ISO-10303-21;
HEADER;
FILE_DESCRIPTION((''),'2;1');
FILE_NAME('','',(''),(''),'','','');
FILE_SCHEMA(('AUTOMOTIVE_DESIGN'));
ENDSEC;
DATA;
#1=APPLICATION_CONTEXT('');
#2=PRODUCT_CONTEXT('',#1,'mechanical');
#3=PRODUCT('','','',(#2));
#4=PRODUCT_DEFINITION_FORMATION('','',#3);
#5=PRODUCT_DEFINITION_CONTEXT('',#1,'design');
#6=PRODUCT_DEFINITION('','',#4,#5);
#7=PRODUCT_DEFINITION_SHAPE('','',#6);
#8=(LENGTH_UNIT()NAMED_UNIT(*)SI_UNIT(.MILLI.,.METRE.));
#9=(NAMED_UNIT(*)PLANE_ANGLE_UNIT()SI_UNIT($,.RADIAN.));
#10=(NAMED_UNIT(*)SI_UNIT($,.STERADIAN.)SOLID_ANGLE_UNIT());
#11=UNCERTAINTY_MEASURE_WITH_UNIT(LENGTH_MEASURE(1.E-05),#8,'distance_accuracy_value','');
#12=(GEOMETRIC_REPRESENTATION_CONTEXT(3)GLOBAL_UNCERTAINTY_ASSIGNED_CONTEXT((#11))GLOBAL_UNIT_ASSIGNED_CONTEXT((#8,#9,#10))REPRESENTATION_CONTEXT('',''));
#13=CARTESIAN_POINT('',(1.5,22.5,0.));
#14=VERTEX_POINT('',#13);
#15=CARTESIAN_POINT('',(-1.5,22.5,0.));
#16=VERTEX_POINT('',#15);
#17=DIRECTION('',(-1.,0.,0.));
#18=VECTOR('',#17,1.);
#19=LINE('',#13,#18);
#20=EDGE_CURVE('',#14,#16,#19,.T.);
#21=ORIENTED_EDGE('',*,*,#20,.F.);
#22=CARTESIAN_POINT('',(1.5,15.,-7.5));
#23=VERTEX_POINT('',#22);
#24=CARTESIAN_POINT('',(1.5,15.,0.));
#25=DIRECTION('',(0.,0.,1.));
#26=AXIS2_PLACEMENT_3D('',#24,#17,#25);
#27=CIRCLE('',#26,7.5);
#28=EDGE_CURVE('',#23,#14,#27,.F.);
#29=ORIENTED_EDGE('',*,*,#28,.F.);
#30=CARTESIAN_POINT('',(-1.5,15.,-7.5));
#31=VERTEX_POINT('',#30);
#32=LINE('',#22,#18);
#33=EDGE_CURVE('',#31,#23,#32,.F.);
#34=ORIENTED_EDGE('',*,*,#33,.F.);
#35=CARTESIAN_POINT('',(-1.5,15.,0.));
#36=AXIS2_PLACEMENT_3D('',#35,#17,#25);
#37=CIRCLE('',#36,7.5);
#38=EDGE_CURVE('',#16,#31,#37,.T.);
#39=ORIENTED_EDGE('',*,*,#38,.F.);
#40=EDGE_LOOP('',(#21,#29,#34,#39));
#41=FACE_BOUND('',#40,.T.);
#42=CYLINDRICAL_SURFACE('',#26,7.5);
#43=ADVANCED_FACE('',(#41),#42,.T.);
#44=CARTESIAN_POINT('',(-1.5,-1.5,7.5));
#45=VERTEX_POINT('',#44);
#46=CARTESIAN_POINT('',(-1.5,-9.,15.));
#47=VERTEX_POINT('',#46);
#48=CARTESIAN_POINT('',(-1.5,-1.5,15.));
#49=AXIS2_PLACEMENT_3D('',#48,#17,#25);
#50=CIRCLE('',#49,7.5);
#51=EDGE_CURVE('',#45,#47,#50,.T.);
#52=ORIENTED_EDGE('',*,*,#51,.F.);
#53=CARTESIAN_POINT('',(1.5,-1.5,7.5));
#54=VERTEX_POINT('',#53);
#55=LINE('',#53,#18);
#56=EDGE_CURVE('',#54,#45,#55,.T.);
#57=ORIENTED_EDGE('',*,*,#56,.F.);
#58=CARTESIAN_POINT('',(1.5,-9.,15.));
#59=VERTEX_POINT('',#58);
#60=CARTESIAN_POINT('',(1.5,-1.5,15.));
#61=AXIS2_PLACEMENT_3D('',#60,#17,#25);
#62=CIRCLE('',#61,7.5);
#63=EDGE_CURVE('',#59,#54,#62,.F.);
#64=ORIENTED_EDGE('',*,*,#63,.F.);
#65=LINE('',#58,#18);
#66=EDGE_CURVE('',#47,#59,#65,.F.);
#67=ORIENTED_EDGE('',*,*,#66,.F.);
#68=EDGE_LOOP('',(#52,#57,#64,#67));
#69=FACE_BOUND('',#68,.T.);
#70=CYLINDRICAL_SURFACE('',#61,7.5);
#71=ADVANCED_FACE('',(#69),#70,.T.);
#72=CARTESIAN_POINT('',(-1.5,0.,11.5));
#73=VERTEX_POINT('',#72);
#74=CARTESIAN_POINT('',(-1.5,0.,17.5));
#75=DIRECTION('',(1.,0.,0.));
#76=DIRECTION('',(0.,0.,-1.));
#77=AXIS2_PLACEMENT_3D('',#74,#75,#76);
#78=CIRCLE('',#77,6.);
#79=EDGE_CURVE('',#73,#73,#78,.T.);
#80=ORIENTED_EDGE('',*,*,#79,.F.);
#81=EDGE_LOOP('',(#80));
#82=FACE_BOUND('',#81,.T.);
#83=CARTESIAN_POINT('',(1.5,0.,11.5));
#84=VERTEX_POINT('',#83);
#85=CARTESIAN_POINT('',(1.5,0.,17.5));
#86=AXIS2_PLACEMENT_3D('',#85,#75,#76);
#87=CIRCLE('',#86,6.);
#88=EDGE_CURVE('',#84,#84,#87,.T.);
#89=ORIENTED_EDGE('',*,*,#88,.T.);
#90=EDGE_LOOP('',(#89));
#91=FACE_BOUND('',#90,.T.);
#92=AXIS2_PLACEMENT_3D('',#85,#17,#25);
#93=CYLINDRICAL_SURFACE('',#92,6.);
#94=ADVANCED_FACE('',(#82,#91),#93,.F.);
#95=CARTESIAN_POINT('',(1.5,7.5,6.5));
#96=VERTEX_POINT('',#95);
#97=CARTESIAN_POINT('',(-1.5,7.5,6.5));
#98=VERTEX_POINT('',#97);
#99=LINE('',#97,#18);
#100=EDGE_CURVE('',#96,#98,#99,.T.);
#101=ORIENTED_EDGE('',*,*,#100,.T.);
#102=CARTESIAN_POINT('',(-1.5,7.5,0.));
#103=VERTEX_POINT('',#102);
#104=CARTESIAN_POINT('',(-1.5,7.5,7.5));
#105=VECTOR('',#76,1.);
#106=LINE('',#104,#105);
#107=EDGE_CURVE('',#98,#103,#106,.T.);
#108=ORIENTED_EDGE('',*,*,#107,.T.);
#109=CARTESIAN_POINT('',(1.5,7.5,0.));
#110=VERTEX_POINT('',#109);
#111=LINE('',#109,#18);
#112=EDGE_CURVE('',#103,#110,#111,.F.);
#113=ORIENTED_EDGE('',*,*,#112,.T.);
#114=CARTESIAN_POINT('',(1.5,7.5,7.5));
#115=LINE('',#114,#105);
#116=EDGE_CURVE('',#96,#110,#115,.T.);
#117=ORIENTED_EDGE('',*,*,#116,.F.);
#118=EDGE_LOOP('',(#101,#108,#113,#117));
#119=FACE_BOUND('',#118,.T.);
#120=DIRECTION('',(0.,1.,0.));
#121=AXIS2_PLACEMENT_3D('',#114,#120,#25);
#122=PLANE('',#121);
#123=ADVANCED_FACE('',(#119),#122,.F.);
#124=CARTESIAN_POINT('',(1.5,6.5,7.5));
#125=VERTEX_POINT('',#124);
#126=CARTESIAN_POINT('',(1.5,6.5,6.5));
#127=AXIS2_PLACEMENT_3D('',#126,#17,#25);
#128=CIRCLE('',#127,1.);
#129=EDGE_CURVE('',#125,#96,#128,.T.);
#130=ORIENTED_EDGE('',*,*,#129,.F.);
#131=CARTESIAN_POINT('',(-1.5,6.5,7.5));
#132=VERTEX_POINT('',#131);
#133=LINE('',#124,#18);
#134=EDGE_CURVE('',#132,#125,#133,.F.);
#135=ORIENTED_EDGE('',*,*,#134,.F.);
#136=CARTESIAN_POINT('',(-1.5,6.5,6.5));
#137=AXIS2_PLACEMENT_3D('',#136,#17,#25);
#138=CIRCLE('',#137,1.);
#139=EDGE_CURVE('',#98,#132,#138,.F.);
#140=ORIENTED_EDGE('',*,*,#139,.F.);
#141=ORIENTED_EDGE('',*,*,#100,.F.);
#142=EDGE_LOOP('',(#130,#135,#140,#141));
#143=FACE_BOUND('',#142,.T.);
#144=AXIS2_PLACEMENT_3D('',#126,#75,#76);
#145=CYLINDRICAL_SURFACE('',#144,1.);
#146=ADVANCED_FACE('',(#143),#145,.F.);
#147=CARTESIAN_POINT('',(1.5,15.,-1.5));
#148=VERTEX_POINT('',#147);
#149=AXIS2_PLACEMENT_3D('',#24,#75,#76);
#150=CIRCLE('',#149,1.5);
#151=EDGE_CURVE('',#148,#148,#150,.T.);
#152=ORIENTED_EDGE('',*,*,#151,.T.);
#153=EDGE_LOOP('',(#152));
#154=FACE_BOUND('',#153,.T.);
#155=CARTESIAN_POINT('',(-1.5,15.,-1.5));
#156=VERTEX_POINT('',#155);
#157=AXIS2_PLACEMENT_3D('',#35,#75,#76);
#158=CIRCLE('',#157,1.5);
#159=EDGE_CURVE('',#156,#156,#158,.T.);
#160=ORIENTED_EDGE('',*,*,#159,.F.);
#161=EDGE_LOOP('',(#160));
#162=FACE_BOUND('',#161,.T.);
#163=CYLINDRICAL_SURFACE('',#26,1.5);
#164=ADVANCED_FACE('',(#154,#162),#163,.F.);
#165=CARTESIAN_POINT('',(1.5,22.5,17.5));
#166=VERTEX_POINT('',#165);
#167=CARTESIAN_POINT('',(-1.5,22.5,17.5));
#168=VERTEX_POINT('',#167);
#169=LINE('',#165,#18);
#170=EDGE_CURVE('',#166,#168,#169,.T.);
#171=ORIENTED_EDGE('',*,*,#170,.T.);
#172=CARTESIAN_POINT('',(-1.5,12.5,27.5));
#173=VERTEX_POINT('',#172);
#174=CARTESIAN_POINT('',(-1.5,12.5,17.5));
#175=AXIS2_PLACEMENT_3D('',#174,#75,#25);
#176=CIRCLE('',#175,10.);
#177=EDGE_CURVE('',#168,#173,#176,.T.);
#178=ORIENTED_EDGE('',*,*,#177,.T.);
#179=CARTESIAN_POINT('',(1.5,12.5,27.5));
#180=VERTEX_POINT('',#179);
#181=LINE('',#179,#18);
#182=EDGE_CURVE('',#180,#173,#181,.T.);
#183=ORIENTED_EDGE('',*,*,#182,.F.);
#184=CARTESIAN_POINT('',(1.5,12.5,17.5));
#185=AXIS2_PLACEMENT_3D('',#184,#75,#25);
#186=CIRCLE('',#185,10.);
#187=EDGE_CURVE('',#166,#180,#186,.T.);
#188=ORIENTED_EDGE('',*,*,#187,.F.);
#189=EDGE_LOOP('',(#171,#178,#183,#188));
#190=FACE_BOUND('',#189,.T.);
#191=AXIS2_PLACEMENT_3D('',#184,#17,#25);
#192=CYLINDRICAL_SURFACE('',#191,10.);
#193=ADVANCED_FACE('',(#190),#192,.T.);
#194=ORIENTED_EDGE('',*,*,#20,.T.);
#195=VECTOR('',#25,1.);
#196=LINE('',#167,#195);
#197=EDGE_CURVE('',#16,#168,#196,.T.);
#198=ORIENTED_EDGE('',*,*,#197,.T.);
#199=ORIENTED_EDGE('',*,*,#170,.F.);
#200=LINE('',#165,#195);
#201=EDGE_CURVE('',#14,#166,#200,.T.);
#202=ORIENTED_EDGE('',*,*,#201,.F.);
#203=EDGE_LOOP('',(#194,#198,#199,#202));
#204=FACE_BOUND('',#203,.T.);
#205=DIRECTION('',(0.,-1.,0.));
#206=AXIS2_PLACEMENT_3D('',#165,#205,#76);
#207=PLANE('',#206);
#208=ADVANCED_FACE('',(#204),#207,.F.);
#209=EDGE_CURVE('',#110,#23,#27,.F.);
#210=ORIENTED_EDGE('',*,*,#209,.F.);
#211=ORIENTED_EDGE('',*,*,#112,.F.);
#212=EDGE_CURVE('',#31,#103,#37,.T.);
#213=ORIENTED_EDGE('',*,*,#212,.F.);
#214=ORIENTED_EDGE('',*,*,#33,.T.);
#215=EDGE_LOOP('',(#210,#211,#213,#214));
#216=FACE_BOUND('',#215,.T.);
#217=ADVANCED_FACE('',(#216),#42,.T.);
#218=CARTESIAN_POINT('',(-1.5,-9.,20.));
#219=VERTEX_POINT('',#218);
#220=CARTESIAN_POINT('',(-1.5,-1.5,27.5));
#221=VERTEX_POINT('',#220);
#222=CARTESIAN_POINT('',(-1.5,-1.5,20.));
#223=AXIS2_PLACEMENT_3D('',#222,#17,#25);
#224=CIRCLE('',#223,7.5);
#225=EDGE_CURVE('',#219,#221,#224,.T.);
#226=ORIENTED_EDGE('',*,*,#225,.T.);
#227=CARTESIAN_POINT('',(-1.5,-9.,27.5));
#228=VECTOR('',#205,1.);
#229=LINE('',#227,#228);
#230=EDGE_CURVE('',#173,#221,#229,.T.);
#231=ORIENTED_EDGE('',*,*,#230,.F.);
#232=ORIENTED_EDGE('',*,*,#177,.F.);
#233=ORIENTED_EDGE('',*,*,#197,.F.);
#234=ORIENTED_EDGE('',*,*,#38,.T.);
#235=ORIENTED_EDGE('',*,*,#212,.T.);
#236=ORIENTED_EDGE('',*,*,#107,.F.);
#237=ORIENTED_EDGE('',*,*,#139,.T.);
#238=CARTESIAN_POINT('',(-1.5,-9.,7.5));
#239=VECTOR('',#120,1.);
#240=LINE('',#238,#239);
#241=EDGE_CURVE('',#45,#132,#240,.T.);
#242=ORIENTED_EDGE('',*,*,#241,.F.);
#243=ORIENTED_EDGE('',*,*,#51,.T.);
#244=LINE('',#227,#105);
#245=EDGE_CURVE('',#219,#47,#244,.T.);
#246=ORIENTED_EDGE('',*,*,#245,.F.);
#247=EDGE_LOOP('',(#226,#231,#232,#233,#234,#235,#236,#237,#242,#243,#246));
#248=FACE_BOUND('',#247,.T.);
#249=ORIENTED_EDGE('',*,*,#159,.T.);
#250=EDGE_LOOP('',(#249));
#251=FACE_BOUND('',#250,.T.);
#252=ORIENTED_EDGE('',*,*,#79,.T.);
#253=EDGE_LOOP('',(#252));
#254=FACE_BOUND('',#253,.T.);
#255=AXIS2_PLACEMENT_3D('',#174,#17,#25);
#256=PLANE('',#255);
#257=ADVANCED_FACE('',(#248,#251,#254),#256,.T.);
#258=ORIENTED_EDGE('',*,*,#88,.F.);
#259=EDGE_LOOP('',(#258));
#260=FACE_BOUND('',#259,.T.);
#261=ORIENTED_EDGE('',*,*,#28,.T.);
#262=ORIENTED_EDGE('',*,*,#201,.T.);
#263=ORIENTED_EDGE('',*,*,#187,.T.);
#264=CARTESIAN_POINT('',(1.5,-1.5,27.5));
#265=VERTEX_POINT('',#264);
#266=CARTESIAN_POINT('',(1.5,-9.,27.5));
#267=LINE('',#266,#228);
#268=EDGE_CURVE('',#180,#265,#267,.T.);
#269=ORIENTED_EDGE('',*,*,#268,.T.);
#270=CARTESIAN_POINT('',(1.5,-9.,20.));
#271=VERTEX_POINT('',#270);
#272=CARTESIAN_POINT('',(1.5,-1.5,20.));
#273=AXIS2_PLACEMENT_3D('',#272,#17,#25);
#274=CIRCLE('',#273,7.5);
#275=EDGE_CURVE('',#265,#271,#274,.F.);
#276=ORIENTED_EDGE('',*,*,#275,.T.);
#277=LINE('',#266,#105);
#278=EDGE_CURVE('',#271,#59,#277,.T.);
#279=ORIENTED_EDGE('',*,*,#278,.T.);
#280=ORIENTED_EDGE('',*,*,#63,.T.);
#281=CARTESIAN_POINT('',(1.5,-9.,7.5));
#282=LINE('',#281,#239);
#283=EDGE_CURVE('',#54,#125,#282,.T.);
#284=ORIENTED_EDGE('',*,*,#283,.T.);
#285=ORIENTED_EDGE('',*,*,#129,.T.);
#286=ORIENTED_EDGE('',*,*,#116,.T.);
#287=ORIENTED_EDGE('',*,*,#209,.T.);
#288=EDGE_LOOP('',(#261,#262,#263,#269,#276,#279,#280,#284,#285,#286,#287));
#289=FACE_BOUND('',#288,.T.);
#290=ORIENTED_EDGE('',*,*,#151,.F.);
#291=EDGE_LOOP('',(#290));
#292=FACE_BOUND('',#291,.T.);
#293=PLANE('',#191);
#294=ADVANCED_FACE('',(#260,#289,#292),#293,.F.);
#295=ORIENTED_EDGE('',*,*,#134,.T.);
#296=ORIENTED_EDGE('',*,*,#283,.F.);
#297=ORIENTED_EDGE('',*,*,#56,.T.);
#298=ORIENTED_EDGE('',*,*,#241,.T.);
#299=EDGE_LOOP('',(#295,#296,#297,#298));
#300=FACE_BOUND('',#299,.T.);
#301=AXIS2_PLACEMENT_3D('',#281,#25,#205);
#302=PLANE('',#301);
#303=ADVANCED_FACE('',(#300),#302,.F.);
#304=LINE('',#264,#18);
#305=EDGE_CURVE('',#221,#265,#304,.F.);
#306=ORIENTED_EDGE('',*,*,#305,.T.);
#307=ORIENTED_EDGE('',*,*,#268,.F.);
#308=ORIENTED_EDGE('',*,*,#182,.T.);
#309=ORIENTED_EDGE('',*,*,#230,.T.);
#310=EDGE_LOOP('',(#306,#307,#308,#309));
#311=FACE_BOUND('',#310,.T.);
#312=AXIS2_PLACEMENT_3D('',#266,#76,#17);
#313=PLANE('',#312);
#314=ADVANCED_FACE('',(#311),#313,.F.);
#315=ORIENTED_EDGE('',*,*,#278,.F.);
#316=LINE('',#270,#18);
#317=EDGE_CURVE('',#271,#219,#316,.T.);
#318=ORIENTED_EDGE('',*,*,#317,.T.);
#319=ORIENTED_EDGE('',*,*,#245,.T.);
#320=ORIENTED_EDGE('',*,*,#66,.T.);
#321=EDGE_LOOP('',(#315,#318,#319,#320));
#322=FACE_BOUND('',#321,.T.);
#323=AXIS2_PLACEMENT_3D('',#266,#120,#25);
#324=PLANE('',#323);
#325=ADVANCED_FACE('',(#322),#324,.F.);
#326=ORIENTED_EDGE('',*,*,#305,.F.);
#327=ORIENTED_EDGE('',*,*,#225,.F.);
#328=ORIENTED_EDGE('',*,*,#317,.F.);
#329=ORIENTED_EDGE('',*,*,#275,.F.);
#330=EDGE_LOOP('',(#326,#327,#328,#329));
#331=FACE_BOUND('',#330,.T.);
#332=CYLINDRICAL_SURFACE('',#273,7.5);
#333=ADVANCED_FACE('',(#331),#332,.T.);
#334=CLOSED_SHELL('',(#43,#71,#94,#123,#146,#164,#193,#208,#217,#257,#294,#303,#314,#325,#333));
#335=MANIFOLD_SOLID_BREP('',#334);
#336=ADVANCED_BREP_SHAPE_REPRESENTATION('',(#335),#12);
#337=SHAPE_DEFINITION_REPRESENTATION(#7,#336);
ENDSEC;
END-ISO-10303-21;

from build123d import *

# Parameters (mm, degrees)
SKETCH1_R           = 6
SKETCH1_R_2         = 1.5
BOSS_EXTRUDE1_DEPTH = 1.5
FILLET1_R           = 7.5
FILLET2_R           = 1


with BuildPart() as part:
    # Sketch1 → Boss-Extrude1 (new, symmetric)
    with BuildSketch(Plane(origin=(0, 0, 0), x_dir=(0, 0, -1), z_dir=(1, 0, 0))):
        with BuildLine():
            Line((-7.5, 7.5), (7.5, 7.5))
            Line((7.5, 7.5), (7.5, 22.5))
            Line((7.5, 22.5), (-17.5, 22.5))
            ThreePointArc((-17.5, 22.5), (-24.571067812, 19.571067812), (-27.5, 12.5))
            Line((-27.5, 12.5), (-27.5, -9))
            Line((-27.5, -9), (-7.5, -9))
            Line((-7.5, -9), (-7.5, 7.5))
        make_face()
        with Locations((-17.5, 0)):
            Circle(SKETCH1_R, mode=Mode.SUBTRACT)
        with Locations((0, 15)):
            Circle(SKETCH1_R_2, mode=Mode.SUBTRACT)
    extrude(amount=BOSS_EXTRUDE1_DEPTH, both=True)

    # Fillet1
    fillet1_edges = [part.edges().sort_by_distance(p)[0] for p in [
        (0, -9, 27.5),
        (0, -9, 7.5),
        (0, 7.5, -7.5),
        (0, 22.5, -7.5),
    ]]
    fillet(fillet1_edges, radius=FILLET1_R - 0.0001)  # a hair under: the kernel refuses the full size

    # Fillet2
    fillet2_edges = [part.edges().sort_by_distance(p)[0] for p in [
        (0, 7.5, 7.5),
    ]]
    fillet(fillet2_edges, radius=FILLET2_R)


solid = part.part
